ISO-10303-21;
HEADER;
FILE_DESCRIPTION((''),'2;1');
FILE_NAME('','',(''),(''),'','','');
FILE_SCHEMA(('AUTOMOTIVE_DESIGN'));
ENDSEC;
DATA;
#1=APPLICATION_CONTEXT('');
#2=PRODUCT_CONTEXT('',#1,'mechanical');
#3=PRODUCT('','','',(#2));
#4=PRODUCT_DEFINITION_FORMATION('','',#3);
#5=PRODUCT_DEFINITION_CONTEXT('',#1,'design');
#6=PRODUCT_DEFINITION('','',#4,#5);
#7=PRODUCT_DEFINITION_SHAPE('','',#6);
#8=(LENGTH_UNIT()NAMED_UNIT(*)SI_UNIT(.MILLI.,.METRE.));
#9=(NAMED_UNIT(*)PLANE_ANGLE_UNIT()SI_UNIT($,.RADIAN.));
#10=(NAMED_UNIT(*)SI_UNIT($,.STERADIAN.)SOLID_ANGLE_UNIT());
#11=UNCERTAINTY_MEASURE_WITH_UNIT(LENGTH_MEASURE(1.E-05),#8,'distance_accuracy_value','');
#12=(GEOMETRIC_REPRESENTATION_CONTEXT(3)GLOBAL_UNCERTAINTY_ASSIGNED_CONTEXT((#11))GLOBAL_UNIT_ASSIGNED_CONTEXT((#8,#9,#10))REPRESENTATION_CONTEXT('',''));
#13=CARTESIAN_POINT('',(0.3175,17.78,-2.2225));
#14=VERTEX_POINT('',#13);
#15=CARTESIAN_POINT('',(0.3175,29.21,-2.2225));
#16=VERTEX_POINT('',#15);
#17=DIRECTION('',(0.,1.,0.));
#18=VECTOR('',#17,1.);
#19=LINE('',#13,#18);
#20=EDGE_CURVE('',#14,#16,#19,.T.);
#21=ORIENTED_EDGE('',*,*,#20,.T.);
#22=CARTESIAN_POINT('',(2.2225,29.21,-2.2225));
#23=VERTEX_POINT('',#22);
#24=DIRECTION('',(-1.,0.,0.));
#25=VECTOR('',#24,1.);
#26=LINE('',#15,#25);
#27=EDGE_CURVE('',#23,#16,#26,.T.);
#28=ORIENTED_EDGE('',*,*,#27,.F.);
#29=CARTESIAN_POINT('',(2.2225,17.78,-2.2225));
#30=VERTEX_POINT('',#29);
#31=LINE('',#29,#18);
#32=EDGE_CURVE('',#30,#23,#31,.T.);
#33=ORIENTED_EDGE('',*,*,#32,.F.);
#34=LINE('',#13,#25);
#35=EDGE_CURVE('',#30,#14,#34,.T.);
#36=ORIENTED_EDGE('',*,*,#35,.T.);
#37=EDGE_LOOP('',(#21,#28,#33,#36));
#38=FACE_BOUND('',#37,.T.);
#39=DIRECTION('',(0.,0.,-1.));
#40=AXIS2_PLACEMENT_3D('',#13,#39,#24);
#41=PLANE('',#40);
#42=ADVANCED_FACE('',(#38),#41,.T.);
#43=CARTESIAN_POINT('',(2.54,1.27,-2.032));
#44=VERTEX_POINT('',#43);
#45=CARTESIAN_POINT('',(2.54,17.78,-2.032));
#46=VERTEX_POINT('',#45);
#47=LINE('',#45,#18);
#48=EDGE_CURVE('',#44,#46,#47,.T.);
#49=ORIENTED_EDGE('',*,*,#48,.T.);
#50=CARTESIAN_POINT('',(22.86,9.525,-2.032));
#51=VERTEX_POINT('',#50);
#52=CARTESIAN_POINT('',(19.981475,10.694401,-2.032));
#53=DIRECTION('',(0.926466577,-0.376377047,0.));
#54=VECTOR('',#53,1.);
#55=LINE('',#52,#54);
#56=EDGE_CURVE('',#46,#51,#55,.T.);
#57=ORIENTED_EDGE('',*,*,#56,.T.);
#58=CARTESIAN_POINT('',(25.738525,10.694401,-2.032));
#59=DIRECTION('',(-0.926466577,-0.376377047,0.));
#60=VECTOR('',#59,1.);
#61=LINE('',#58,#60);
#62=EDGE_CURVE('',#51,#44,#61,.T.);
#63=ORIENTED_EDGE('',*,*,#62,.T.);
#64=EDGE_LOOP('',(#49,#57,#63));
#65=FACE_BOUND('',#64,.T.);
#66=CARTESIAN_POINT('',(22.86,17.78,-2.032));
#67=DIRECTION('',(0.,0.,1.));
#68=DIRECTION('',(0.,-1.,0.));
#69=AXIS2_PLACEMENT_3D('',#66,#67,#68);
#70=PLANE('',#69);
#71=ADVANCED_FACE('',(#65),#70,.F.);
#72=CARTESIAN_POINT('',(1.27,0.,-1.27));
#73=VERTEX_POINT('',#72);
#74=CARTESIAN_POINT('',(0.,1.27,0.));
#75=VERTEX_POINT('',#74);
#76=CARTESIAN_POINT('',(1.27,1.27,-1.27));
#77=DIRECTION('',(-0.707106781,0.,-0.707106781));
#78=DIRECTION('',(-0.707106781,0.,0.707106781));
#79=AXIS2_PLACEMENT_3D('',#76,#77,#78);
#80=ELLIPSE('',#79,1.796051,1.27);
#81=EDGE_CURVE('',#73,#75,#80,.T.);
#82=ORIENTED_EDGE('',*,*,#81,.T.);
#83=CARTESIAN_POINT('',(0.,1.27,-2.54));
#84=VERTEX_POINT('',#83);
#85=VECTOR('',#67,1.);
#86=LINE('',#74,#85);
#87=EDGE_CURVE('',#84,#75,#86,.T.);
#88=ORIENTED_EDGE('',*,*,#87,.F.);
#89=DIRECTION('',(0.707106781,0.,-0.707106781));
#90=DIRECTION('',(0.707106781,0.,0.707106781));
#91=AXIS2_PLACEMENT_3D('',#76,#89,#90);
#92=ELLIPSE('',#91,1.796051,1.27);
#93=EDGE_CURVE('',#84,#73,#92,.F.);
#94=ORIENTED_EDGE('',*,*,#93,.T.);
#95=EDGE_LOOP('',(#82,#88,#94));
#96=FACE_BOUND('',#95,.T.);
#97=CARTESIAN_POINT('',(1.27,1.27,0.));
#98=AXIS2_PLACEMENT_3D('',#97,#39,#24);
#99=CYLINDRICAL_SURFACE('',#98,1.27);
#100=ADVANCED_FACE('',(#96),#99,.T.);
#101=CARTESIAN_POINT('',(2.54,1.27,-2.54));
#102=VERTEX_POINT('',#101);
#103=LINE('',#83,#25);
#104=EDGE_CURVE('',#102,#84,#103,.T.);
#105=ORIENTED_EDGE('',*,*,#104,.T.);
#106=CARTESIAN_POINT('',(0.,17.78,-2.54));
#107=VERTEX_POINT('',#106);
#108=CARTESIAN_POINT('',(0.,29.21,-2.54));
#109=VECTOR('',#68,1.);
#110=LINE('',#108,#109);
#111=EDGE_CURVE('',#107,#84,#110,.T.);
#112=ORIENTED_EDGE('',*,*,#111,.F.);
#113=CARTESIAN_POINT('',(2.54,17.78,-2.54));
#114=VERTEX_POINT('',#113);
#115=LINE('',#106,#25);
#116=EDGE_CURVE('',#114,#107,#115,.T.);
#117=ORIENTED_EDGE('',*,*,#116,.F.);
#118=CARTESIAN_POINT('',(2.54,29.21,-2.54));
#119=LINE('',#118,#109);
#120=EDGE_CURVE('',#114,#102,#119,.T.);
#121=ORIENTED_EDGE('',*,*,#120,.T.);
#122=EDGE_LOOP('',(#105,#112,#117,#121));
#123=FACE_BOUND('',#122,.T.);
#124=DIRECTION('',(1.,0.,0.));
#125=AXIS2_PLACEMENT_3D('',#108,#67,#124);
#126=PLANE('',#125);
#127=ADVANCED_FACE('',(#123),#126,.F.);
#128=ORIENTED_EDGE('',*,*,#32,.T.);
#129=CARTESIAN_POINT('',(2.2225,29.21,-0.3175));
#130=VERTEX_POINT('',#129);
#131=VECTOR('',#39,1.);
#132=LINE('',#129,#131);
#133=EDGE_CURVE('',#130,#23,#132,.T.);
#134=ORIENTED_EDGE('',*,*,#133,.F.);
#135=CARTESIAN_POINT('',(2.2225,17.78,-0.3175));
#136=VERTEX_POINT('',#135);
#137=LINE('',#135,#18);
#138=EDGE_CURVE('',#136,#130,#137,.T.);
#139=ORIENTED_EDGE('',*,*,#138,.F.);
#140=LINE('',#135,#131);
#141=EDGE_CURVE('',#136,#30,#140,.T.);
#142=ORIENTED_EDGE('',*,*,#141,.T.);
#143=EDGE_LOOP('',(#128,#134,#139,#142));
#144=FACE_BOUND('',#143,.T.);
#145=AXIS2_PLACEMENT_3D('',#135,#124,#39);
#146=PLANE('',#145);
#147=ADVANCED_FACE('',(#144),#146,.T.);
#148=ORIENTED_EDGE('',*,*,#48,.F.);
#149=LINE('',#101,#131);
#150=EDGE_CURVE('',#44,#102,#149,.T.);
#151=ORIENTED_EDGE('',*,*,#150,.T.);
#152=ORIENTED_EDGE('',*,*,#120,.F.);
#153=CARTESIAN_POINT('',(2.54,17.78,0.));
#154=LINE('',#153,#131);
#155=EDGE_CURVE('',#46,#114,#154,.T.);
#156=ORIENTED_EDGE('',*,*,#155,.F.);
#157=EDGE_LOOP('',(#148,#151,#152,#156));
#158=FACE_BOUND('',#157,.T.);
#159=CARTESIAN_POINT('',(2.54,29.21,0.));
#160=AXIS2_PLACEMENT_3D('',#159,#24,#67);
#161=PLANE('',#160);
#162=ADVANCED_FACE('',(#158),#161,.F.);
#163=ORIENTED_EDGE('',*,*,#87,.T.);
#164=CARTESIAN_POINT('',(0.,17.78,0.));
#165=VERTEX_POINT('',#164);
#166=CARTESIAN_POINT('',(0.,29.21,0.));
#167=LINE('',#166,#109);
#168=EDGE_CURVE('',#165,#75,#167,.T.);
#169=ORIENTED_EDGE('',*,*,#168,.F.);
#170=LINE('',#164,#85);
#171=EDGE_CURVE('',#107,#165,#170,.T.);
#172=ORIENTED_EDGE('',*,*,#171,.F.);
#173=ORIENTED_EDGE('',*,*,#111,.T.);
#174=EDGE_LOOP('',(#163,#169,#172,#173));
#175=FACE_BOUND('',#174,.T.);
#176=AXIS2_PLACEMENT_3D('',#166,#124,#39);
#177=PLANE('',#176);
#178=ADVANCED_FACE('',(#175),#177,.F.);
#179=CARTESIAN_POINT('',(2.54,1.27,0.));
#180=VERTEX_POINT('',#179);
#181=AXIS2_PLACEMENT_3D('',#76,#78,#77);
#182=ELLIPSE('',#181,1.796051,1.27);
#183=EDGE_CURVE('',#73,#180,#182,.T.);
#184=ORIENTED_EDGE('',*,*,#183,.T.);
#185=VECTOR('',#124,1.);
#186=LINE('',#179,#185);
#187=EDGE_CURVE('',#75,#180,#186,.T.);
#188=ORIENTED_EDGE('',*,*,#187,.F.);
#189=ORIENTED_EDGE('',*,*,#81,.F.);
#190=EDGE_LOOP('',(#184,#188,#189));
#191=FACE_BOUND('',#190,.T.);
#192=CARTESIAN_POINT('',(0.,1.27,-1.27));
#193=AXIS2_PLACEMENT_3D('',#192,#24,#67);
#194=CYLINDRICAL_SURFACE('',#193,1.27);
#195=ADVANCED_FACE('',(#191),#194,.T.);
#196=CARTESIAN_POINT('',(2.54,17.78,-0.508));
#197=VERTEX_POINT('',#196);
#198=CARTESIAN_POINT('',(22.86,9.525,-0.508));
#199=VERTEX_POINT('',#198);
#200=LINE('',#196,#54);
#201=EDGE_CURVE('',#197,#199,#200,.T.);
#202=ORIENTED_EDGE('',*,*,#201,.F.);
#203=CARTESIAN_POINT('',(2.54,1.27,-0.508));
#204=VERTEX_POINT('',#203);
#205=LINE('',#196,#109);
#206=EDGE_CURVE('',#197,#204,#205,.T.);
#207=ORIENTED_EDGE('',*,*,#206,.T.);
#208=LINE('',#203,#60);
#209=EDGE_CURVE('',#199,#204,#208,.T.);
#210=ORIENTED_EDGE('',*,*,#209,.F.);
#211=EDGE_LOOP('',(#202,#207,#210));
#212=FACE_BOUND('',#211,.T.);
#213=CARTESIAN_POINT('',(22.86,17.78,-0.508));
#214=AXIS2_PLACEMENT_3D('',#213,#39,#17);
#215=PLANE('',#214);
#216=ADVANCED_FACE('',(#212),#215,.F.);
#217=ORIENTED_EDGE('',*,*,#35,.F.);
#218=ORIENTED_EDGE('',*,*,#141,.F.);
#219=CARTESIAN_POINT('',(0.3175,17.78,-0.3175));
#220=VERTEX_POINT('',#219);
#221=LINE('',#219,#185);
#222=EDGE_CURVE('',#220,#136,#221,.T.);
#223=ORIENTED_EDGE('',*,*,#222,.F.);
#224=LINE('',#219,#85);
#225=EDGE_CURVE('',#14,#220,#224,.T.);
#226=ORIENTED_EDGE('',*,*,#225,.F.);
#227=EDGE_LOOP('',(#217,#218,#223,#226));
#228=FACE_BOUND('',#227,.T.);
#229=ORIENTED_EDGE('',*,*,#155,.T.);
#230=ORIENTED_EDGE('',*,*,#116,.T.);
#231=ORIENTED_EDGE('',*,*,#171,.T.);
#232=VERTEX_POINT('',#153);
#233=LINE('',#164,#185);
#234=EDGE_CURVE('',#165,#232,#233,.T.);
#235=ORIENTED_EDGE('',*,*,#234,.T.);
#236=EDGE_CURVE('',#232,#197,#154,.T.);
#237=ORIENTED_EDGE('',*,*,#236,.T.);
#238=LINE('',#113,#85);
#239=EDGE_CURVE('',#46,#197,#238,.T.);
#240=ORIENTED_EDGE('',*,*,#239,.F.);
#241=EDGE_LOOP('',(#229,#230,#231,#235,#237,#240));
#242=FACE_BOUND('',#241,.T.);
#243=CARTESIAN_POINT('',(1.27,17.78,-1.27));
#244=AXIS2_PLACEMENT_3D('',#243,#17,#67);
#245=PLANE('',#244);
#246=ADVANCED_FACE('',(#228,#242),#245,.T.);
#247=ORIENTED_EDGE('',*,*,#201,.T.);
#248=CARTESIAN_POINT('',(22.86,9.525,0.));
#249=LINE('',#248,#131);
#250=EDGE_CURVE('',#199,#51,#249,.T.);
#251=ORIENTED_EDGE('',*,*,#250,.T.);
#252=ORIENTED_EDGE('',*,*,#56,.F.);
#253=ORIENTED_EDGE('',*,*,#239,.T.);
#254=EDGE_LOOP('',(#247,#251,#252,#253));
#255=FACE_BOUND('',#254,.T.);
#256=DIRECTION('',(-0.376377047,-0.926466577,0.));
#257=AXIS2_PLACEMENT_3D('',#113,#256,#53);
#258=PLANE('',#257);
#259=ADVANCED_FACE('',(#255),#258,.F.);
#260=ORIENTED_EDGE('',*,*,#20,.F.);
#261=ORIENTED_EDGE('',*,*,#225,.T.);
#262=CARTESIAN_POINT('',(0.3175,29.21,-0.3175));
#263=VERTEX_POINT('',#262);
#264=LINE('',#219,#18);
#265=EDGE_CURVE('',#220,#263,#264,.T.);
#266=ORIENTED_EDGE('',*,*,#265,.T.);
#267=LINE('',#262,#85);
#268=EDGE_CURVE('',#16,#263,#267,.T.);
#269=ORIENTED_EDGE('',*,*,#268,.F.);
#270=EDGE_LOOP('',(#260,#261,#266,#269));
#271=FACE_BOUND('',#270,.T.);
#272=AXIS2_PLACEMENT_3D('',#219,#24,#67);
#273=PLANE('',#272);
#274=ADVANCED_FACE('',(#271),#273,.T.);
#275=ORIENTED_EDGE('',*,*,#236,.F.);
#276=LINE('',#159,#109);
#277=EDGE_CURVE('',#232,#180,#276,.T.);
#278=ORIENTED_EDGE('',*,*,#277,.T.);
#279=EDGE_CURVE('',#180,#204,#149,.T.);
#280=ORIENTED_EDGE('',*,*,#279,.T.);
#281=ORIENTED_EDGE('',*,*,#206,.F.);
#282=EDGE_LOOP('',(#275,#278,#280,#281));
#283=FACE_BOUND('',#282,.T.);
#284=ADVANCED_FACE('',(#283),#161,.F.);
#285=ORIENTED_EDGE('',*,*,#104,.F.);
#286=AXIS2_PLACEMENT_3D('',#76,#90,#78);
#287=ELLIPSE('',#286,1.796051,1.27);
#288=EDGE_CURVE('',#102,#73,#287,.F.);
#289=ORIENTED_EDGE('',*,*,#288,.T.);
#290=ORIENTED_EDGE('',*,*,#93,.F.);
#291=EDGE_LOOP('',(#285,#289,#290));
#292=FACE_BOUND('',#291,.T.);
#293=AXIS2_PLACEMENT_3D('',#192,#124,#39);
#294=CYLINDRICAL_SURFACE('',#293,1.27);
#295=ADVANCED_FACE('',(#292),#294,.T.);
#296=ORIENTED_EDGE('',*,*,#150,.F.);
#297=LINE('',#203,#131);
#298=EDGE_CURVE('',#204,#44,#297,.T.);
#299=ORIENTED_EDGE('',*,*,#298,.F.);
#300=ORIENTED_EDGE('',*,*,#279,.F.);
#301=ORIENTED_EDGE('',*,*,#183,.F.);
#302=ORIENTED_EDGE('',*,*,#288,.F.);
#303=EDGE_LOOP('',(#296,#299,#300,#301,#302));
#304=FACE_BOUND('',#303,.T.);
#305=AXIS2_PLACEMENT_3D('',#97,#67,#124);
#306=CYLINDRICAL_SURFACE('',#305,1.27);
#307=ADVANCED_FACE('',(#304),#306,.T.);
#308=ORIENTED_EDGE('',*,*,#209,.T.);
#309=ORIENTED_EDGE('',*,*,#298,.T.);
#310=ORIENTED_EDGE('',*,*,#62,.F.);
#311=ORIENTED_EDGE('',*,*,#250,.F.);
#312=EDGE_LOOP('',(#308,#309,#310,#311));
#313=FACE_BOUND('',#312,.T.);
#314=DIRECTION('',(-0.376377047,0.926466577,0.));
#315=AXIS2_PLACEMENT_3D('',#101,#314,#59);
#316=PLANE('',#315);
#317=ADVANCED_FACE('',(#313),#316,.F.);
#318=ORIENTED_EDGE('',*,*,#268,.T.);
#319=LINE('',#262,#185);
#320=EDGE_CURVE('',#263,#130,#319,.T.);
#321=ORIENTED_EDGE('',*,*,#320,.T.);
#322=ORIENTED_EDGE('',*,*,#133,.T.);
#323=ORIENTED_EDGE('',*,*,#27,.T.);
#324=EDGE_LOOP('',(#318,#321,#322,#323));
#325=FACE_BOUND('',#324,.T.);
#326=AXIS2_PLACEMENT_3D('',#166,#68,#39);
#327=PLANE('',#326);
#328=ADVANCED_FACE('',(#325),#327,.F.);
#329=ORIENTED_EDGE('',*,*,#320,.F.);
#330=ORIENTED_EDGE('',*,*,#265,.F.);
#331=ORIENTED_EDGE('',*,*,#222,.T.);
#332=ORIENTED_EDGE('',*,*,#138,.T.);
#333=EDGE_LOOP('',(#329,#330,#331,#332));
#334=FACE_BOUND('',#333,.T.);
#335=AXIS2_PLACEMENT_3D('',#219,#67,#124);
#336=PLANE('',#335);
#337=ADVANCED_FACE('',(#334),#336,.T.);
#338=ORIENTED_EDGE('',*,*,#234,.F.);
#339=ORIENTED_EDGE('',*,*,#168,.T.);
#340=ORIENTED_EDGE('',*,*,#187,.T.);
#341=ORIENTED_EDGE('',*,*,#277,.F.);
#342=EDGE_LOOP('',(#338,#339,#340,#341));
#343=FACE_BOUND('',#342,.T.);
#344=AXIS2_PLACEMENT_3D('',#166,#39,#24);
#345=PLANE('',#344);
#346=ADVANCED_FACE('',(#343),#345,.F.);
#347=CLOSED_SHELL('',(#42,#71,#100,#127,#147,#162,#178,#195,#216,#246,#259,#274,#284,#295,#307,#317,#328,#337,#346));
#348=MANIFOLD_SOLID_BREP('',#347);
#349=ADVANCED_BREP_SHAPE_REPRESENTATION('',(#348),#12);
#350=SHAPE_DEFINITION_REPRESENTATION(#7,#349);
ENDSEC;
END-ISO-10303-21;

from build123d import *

# Parameters (mm, degrees)
SKETCH1_W           = 2.54
SKETCH1_H           = 2.54
BOSS_EXTRUDE1_DEPTH = 29.21
SKETCH2_OUTSIDE_W   = 10.426
SKETCH2_OUTSIDE_H   = 10.426
SKETCH2_OUTSIDE_W_2 = 1.905
SKETCH2_OUTSIDE_H_2 = 1.905
CUT_EXTRUDE1_DEPTH  = 11.43
FILLET1_R           = 1.27
SKETCH3_W           = 1.524
SKETCH3_H           = 16.51
BOSS_EXTRUDE2_DEPTH = 20.32
CUT_EXTRUDE2_DEPTH  = 38.147445726
CUT_EXTRUDE3_DEPTH  = 38.147445726


with BuildPart() as part:
    # Sketch1 → Boss-Extrude1 (new body)
    with BuildSketch(Plane(origin=(0, 0, 0), x_dir=(1, 0, 0), z_dir=(0, 1, 0))):
        with Locations((1.27, 1.27)):
            Rectangle(SKETCH1_W, SKETCH1_H)
    extrude(amount=BOSS_EXTRUDE1_DEPTH)

    # Sketch2 outside → Cut-Extrude1 (cut)
    with BuildSketch(Plane(origin=(0, 29.21, 0), x_dir=(1, 0, 0), z_dir=(0, 1, 0))):
        with Locations((1.27, 1.27)):
            Rectangle(SKETCH2_OUTSIDE_W, SKETCH2_OUTSIDE_H)
        with Locations((1.27, 1.27)):
            Rectangle(SKETCH2_OUTSIDE_W_2, SKETCH2_OUTSIDE_H_2, mode=Mode.SUBTRACT)
    extrude(amount=-CUT_EXTRUDE1_DEPTH, mode=Mode.SUBTRACT)

    # Fillet1
    fillet1_edges = [part.edges().sort_by_distance(p)[0] for p in [
        (1.27, 0, -2.54),
        (2.54, 0, -1.27),
        (1.27, 0, 0),
        (0, 0, -1.27),
    ]]
    fillet(fillet1_edges, radius=FILLET1_R - 0.0001)  # a hair under: the kernel refuses the full size

    # Sketch3 → Boss-Extrude2 (add)
    with BuildSketch(Plane(origin=(2.54, 0, 0), x_dir=(0, 0, -1), z_dir=(1, 0, 0))):
        with Locations((1.27, 9.525)):
            Rectangle(SKETCH3_W, SKETCH3_H)
    extrude(amount=BOSS_EXTRUDE2_DEPTH)

    # Sketch4 → Cut-Extrude2 (cut, through all)
    with BuildSketch(Plane.XY.offset(-0.508)):
        Polygon((2.54, 17.78), (22.86, 9.525), (22.86, 17.78), align=None)
    extrude(amount=-CUT_EXTRUDE2_DEPTH, mode=Mode.SUBTRACT)

    # Sketch5 → Cut-Extrude3 (cut, through all)
    with BuildSketch(Plane.XY.offset(-0.508)):
        Polygon((2.54, 1.27), (22.86, 9.525), (22.86, 1.27), align=None)
    extrude(amount=-CUT_EXTRUDE3_DEPTH, mode=Mode.SUBTRACT)


solid = part.part
